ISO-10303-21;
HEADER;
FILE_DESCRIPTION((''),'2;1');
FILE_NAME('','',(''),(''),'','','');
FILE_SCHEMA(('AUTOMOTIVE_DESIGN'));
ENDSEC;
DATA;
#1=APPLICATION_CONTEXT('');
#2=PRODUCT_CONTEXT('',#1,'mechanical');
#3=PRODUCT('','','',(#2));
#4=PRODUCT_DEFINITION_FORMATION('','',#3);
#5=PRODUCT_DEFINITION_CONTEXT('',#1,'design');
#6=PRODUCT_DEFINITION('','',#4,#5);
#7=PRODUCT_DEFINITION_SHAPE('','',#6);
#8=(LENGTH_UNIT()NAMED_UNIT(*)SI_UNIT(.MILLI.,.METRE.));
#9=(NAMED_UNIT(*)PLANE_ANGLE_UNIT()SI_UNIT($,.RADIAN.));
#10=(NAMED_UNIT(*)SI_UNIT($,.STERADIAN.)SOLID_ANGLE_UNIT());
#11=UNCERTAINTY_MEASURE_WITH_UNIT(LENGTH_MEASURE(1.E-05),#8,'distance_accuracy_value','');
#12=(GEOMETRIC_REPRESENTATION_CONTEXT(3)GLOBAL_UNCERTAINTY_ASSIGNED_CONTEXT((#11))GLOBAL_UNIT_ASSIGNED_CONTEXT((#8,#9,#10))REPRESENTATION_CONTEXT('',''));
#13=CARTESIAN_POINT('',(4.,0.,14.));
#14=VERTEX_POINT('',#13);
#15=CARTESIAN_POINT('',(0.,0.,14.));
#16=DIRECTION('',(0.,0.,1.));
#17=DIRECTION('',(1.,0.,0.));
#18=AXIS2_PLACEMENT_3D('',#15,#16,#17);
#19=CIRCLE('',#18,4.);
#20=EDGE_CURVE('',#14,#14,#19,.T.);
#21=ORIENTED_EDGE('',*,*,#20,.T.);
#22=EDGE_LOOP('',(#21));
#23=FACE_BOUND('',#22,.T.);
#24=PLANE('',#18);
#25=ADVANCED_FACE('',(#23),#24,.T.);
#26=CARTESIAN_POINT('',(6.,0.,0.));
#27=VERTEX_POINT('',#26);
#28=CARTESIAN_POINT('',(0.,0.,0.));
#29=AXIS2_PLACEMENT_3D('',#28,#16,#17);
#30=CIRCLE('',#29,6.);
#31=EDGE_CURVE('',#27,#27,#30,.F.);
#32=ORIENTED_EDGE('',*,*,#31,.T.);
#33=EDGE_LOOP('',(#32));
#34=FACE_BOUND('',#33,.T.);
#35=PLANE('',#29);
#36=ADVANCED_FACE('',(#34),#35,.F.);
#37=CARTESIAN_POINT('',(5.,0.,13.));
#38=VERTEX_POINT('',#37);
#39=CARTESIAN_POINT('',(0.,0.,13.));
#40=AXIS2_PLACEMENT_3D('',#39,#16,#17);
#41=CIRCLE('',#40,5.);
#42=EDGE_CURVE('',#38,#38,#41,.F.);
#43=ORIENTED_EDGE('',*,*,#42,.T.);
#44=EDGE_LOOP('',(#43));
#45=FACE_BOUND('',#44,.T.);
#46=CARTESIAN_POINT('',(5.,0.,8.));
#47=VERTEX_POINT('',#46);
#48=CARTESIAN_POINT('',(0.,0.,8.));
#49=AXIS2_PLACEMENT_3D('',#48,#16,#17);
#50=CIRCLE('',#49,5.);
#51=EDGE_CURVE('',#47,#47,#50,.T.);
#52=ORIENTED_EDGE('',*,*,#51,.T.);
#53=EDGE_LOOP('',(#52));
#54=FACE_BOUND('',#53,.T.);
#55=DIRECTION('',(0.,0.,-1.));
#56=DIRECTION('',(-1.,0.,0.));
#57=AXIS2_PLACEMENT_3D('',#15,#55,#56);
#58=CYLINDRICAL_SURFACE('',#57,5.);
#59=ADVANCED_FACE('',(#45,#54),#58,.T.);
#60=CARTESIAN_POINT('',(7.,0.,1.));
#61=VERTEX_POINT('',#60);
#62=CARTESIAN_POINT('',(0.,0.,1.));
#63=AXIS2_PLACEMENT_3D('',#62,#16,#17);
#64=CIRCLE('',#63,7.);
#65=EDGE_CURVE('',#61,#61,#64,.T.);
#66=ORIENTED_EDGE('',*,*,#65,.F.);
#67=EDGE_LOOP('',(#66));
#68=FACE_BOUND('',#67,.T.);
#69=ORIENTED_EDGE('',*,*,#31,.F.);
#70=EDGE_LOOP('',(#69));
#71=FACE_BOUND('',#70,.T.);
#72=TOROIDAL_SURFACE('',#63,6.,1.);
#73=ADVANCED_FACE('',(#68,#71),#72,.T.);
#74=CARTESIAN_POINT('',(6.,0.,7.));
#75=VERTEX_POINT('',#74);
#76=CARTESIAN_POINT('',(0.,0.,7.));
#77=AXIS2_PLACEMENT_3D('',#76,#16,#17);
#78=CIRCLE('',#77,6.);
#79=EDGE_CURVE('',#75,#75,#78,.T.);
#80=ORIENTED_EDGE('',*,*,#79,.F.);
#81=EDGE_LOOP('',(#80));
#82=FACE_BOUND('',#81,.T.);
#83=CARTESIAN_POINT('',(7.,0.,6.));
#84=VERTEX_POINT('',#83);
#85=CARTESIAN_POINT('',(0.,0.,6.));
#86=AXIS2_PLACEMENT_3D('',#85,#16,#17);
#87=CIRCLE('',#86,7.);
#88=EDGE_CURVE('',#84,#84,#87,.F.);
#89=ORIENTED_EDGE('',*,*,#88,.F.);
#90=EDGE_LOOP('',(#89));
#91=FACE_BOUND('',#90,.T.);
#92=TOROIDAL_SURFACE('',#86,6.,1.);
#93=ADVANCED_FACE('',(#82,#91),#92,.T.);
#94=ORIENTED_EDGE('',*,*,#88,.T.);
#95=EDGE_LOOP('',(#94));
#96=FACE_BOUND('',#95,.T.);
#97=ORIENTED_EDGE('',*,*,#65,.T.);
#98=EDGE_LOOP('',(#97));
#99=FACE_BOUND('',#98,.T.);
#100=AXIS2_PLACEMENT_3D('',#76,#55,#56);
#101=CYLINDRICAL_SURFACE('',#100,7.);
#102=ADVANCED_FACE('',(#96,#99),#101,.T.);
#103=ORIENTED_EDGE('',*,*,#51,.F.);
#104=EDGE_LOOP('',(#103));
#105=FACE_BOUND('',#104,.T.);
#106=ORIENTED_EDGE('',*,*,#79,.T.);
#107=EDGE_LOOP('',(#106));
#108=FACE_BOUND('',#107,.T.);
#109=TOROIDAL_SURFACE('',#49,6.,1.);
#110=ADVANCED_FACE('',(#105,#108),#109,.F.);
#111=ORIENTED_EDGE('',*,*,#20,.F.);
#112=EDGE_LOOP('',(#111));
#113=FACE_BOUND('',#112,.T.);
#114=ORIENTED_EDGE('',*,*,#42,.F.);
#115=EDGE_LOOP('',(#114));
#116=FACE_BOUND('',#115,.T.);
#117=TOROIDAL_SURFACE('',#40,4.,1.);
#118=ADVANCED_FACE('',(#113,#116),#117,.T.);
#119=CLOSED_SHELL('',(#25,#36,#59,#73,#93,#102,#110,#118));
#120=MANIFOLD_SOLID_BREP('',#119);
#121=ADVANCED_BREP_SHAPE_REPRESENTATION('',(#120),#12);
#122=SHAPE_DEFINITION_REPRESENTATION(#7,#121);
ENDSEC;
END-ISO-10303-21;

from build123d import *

# Parameters (mm, degrees)
SKETCH1_R           = 7
BOSS_EXTRUDE1_DEPTH = 7
FILLET1_R           = 1
SKETCH2_R           = 5
BOSS_EXTRUDE2_DEPTH = 7
FILLET2_R           = 1


with BuildPart() as part:
    # Sketch1 → Boss-Extrude1 (new body)
    with BuildSketch(Plane.XY):
        Circle(SKETCH1_R)
    extrude(amount=BOSS_EXTRUDE1_DEPTH)

    # Fillet1
    fillet1_edges = [part.edges().sort_by_distance(p)[0] for p in [
        (-7, 0, 0),
        (-7, 0, 7),
    ]]
    fillet(fillet1_edges, radius=FILLET1_R)

    # Sketch2 → Boss-Extrude2 (add)
    with BuildSketch(Plane.XY.offset(7)):
        Circle(SKETCH2_R)
    extrude(amount=BOSS_EXTRUDE2_DEPTH)

    # Fillet2
    fillet2_edges = [part.edges().sort_by_distance(p)[0] for p in [
        (-5, 0, 7),
        (-5, 0, 14),
    ]]
    fillet(fillet2_edges, radius=FILLET2_R - 0.0001)  # a hair under: the kernel refuses the full size


solid = part.part
